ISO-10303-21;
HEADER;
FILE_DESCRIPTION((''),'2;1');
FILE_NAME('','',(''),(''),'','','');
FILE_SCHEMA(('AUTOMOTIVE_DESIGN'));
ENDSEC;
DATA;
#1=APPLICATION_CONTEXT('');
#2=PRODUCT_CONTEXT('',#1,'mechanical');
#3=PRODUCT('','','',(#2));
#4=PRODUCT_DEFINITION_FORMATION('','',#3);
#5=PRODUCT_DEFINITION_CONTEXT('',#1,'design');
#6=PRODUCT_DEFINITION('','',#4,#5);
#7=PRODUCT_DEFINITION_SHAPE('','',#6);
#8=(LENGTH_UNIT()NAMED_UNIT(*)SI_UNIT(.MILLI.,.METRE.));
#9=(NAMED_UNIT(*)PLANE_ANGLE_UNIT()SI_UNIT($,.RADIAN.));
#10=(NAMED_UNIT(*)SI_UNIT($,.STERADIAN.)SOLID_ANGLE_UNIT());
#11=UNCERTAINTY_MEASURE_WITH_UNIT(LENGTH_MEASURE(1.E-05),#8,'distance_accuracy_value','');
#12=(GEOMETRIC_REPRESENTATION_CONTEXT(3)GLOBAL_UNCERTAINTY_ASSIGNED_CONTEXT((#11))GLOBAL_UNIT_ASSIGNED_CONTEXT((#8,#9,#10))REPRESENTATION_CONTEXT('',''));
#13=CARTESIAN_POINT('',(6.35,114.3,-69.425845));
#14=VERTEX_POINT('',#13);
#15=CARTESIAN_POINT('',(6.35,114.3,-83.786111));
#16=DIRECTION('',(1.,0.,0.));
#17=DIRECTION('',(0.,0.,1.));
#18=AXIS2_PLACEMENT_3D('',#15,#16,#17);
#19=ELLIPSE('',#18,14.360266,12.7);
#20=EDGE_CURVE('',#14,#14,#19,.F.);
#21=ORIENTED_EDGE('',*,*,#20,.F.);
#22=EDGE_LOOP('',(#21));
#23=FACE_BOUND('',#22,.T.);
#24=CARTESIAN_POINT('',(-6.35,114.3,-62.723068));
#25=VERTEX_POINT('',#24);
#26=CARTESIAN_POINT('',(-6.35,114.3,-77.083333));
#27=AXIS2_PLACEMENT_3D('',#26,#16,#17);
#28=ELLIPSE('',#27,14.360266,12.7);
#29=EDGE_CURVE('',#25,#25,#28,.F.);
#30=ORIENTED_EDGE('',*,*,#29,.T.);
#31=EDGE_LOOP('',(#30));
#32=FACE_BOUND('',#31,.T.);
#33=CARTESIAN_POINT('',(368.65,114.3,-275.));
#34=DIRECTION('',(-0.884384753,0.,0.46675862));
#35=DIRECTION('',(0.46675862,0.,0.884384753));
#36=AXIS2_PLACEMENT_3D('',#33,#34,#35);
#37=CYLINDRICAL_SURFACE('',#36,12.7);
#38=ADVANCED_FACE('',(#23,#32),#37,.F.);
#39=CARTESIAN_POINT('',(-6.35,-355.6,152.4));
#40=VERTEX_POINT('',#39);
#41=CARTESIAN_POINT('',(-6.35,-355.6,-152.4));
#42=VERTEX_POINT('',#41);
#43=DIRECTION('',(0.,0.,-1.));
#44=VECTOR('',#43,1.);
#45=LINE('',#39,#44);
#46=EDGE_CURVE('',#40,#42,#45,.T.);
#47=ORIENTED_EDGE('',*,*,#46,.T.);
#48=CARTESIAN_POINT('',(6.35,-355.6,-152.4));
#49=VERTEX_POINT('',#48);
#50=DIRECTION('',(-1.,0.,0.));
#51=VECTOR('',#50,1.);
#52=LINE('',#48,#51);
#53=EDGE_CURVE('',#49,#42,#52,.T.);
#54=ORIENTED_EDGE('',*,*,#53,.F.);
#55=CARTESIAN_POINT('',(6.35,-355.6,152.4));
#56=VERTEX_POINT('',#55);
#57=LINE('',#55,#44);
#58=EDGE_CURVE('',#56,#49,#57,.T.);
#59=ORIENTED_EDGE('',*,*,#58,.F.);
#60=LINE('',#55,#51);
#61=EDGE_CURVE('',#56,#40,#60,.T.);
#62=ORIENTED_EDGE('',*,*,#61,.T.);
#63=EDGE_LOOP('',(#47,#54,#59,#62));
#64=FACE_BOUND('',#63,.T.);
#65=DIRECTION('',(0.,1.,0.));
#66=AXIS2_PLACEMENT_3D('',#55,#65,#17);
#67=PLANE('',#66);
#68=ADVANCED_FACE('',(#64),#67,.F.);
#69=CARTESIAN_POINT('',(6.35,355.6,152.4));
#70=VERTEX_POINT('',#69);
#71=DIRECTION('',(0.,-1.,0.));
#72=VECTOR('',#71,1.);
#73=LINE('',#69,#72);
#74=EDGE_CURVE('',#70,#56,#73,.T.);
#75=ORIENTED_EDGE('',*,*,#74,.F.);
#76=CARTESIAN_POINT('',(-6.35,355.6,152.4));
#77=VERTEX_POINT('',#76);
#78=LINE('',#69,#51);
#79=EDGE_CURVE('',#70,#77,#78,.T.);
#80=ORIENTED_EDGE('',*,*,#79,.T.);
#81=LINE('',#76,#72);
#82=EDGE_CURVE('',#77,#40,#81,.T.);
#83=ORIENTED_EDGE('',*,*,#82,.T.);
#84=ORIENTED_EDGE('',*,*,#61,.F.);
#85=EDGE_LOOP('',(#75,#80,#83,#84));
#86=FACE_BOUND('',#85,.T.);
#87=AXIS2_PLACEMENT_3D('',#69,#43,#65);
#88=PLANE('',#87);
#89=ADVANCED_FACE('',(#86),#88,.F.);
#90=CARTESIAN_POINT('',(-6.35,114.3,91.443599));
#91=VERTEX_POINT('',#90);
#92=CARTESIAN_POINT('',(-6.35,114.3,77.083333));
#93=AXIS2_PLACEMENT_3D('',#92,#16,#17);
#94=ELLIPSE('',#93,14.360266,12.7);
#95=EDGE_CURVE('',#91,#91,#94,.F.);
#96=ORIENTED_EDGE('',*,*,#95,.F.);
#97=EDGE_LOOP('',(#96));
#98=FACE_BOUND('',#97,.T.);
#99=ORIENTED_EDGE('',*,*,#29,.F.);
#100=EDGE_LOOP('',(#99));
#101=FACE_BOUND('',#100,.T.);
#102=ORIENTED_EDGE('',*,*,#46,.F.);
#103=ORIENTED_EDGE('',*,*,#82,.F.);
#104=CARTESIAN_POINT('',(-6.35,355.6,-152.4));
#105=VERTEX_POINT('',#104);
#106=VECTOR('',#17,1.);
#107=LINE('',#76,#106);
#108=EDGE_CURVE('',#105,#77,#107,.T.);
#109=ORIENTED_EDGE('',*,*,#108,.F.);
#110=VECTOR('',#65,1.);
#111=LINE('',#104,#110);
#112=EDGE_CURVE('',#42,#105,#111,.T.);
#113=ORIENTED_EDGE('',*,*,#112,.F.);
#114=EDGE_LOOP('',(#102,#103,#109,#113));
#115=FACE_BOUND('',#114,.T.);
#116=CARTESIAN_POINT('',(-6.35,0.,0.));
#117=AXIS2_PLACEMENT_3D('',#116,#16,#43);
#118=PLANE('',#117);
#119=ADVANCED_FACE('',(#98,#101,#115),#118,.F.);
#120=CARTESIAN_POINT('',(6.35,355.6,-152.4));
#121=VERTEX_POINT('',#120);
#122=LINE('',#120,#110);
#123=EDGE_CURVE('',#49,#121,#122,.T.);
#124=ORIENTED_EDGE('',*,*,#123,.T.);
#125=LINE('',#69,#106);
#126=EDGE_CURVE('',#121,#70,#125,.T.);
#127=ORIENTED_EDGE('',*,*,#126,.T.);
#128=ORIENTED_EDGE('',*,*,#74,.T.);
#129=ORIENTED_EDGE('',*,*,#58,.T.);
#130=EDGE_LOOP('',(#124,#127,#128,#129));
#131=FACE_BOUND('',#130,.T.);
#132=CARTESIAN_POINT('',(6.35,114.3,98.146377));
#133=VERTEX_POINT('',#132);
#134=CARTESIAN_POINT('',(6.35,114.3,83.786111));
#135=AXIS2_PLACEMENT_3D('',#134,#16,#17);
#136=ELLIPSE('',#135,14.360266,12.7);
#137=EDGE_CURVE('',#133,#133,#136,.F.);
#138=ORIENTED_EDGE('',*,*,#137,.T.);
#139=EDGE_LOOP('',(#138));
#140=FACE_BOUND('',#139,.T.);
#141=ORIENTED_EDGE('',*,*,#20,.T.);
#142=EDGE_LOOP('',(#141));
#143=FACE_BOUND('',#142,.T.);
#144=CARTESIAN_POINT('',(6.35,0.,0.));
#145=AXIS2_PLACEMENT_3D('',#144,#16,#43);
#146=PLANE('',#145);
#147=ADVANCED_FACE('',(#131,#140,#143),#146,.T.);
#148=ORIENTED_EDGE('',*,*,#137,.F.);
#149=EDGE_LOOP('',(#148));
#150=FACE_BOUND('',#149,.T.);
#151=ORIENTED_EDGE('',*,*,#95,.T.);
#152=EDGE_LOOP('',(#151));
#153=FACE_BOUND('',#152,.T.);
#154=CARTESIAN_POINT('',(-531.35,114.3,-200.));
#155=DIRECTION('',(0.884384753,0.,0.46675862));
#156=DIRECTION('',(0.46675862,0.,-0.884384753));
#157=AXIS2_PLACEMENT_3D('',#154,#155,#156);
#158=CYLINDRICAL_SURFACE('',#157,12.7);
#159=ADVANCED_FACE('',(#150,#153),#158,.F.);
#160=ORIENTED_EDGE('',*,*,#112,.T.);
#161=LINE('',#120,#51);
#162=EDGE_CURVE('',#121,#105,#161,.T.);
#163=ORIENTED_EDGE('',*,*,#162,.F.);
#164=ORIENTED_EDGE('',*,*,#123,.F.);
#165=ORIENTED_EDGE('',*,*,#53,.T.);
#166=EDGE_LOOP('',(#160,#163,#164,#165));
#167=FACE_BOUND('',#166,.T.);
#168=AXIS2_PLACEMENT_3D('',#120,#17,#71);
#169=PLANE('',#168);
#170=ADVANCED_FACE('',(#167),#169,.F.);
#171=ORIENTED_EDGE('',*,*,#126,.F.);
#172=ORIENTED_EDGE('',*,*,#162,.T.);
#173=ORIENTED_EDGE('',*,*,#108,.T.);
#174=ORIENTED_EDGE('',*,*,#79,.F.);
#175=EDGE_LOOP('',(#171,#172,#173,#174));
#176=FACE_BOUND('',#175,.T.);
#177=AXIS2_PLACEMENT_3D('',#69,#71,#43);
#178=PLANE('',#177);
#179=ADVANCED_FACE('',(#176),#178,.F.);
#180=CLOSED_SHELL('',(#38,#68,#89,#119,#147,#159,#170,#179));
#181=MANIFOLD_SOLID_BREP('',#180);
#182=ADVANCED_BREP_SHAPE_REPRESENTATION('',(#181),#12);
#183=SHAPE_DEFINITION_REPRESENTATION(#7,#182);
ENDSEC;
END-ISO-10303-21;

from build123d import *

# Parameters (mm, degrees)
SKETCH1_W           = 304.8
SKETCH1_H           = 711.2
BOSS_EXTRUDE1_DEPTH = 6.35
CAVITY1_START       = 23.660689199
CAVITY1_OUTLINE_R   = 12.7
CAVITY1_DEPTH       = 27.76582142
CAVITY1_2_OUTLINE_R = 12.7
CAVITY1_2_DEPTH     = 27.76582142


# Read off the part's stored shape, not the designer's step: Cavity1
with BuildPart() as part:
    # Sketch1 → Boss-Extrude1 (new, symmetric)
    with BuildSketch(Plane(origin=(0, 0, 0), x_dir=(0, 0, -1), z_dir=(1, 0, 0))):
        Rectangle(SKETCH1_W, SKETCH1_H)
    extrude(amount=BOSS_EXTRUDE1_DEPTH, both=True)

    # Cavity1 outline → Cavity1 (cut)
    with BuildSketch(Plane(origin=(0, 0, 0), x_dir=(0.4667586195581355, 0, 0.8843847528469629), z_dir=(0.8843847528469628, 0, -0.4667586195581359)).offset(CAVITY1_START)):
        with Locations((-71.135241933, -114.3)):
            Circle(CAVITY1_OUTLINE_R)
    extrude(amount=CAVITY1_DEPTH, mode=Mode.SUBTRACT)

    # Cavity1 2 outline → Cavity1 2 (cut)
    with BuildSketch(Plane(origin=(0, 0, 0), x_dir=(0.4667586195581373, 0, -0.8843847528469619), z_dir=(0.8843847528469618, 0, 0.4667586195581379)).offset(CAVITY1_START)):
        with Locations((-71.135241933, 114.3)):
            Circle(CAVITY1_2_OUTLINE_R)
    extrude(amount=CAVITY1_2_DEPTH, mode=Mode.SUBTRACT)


solid = part.part
